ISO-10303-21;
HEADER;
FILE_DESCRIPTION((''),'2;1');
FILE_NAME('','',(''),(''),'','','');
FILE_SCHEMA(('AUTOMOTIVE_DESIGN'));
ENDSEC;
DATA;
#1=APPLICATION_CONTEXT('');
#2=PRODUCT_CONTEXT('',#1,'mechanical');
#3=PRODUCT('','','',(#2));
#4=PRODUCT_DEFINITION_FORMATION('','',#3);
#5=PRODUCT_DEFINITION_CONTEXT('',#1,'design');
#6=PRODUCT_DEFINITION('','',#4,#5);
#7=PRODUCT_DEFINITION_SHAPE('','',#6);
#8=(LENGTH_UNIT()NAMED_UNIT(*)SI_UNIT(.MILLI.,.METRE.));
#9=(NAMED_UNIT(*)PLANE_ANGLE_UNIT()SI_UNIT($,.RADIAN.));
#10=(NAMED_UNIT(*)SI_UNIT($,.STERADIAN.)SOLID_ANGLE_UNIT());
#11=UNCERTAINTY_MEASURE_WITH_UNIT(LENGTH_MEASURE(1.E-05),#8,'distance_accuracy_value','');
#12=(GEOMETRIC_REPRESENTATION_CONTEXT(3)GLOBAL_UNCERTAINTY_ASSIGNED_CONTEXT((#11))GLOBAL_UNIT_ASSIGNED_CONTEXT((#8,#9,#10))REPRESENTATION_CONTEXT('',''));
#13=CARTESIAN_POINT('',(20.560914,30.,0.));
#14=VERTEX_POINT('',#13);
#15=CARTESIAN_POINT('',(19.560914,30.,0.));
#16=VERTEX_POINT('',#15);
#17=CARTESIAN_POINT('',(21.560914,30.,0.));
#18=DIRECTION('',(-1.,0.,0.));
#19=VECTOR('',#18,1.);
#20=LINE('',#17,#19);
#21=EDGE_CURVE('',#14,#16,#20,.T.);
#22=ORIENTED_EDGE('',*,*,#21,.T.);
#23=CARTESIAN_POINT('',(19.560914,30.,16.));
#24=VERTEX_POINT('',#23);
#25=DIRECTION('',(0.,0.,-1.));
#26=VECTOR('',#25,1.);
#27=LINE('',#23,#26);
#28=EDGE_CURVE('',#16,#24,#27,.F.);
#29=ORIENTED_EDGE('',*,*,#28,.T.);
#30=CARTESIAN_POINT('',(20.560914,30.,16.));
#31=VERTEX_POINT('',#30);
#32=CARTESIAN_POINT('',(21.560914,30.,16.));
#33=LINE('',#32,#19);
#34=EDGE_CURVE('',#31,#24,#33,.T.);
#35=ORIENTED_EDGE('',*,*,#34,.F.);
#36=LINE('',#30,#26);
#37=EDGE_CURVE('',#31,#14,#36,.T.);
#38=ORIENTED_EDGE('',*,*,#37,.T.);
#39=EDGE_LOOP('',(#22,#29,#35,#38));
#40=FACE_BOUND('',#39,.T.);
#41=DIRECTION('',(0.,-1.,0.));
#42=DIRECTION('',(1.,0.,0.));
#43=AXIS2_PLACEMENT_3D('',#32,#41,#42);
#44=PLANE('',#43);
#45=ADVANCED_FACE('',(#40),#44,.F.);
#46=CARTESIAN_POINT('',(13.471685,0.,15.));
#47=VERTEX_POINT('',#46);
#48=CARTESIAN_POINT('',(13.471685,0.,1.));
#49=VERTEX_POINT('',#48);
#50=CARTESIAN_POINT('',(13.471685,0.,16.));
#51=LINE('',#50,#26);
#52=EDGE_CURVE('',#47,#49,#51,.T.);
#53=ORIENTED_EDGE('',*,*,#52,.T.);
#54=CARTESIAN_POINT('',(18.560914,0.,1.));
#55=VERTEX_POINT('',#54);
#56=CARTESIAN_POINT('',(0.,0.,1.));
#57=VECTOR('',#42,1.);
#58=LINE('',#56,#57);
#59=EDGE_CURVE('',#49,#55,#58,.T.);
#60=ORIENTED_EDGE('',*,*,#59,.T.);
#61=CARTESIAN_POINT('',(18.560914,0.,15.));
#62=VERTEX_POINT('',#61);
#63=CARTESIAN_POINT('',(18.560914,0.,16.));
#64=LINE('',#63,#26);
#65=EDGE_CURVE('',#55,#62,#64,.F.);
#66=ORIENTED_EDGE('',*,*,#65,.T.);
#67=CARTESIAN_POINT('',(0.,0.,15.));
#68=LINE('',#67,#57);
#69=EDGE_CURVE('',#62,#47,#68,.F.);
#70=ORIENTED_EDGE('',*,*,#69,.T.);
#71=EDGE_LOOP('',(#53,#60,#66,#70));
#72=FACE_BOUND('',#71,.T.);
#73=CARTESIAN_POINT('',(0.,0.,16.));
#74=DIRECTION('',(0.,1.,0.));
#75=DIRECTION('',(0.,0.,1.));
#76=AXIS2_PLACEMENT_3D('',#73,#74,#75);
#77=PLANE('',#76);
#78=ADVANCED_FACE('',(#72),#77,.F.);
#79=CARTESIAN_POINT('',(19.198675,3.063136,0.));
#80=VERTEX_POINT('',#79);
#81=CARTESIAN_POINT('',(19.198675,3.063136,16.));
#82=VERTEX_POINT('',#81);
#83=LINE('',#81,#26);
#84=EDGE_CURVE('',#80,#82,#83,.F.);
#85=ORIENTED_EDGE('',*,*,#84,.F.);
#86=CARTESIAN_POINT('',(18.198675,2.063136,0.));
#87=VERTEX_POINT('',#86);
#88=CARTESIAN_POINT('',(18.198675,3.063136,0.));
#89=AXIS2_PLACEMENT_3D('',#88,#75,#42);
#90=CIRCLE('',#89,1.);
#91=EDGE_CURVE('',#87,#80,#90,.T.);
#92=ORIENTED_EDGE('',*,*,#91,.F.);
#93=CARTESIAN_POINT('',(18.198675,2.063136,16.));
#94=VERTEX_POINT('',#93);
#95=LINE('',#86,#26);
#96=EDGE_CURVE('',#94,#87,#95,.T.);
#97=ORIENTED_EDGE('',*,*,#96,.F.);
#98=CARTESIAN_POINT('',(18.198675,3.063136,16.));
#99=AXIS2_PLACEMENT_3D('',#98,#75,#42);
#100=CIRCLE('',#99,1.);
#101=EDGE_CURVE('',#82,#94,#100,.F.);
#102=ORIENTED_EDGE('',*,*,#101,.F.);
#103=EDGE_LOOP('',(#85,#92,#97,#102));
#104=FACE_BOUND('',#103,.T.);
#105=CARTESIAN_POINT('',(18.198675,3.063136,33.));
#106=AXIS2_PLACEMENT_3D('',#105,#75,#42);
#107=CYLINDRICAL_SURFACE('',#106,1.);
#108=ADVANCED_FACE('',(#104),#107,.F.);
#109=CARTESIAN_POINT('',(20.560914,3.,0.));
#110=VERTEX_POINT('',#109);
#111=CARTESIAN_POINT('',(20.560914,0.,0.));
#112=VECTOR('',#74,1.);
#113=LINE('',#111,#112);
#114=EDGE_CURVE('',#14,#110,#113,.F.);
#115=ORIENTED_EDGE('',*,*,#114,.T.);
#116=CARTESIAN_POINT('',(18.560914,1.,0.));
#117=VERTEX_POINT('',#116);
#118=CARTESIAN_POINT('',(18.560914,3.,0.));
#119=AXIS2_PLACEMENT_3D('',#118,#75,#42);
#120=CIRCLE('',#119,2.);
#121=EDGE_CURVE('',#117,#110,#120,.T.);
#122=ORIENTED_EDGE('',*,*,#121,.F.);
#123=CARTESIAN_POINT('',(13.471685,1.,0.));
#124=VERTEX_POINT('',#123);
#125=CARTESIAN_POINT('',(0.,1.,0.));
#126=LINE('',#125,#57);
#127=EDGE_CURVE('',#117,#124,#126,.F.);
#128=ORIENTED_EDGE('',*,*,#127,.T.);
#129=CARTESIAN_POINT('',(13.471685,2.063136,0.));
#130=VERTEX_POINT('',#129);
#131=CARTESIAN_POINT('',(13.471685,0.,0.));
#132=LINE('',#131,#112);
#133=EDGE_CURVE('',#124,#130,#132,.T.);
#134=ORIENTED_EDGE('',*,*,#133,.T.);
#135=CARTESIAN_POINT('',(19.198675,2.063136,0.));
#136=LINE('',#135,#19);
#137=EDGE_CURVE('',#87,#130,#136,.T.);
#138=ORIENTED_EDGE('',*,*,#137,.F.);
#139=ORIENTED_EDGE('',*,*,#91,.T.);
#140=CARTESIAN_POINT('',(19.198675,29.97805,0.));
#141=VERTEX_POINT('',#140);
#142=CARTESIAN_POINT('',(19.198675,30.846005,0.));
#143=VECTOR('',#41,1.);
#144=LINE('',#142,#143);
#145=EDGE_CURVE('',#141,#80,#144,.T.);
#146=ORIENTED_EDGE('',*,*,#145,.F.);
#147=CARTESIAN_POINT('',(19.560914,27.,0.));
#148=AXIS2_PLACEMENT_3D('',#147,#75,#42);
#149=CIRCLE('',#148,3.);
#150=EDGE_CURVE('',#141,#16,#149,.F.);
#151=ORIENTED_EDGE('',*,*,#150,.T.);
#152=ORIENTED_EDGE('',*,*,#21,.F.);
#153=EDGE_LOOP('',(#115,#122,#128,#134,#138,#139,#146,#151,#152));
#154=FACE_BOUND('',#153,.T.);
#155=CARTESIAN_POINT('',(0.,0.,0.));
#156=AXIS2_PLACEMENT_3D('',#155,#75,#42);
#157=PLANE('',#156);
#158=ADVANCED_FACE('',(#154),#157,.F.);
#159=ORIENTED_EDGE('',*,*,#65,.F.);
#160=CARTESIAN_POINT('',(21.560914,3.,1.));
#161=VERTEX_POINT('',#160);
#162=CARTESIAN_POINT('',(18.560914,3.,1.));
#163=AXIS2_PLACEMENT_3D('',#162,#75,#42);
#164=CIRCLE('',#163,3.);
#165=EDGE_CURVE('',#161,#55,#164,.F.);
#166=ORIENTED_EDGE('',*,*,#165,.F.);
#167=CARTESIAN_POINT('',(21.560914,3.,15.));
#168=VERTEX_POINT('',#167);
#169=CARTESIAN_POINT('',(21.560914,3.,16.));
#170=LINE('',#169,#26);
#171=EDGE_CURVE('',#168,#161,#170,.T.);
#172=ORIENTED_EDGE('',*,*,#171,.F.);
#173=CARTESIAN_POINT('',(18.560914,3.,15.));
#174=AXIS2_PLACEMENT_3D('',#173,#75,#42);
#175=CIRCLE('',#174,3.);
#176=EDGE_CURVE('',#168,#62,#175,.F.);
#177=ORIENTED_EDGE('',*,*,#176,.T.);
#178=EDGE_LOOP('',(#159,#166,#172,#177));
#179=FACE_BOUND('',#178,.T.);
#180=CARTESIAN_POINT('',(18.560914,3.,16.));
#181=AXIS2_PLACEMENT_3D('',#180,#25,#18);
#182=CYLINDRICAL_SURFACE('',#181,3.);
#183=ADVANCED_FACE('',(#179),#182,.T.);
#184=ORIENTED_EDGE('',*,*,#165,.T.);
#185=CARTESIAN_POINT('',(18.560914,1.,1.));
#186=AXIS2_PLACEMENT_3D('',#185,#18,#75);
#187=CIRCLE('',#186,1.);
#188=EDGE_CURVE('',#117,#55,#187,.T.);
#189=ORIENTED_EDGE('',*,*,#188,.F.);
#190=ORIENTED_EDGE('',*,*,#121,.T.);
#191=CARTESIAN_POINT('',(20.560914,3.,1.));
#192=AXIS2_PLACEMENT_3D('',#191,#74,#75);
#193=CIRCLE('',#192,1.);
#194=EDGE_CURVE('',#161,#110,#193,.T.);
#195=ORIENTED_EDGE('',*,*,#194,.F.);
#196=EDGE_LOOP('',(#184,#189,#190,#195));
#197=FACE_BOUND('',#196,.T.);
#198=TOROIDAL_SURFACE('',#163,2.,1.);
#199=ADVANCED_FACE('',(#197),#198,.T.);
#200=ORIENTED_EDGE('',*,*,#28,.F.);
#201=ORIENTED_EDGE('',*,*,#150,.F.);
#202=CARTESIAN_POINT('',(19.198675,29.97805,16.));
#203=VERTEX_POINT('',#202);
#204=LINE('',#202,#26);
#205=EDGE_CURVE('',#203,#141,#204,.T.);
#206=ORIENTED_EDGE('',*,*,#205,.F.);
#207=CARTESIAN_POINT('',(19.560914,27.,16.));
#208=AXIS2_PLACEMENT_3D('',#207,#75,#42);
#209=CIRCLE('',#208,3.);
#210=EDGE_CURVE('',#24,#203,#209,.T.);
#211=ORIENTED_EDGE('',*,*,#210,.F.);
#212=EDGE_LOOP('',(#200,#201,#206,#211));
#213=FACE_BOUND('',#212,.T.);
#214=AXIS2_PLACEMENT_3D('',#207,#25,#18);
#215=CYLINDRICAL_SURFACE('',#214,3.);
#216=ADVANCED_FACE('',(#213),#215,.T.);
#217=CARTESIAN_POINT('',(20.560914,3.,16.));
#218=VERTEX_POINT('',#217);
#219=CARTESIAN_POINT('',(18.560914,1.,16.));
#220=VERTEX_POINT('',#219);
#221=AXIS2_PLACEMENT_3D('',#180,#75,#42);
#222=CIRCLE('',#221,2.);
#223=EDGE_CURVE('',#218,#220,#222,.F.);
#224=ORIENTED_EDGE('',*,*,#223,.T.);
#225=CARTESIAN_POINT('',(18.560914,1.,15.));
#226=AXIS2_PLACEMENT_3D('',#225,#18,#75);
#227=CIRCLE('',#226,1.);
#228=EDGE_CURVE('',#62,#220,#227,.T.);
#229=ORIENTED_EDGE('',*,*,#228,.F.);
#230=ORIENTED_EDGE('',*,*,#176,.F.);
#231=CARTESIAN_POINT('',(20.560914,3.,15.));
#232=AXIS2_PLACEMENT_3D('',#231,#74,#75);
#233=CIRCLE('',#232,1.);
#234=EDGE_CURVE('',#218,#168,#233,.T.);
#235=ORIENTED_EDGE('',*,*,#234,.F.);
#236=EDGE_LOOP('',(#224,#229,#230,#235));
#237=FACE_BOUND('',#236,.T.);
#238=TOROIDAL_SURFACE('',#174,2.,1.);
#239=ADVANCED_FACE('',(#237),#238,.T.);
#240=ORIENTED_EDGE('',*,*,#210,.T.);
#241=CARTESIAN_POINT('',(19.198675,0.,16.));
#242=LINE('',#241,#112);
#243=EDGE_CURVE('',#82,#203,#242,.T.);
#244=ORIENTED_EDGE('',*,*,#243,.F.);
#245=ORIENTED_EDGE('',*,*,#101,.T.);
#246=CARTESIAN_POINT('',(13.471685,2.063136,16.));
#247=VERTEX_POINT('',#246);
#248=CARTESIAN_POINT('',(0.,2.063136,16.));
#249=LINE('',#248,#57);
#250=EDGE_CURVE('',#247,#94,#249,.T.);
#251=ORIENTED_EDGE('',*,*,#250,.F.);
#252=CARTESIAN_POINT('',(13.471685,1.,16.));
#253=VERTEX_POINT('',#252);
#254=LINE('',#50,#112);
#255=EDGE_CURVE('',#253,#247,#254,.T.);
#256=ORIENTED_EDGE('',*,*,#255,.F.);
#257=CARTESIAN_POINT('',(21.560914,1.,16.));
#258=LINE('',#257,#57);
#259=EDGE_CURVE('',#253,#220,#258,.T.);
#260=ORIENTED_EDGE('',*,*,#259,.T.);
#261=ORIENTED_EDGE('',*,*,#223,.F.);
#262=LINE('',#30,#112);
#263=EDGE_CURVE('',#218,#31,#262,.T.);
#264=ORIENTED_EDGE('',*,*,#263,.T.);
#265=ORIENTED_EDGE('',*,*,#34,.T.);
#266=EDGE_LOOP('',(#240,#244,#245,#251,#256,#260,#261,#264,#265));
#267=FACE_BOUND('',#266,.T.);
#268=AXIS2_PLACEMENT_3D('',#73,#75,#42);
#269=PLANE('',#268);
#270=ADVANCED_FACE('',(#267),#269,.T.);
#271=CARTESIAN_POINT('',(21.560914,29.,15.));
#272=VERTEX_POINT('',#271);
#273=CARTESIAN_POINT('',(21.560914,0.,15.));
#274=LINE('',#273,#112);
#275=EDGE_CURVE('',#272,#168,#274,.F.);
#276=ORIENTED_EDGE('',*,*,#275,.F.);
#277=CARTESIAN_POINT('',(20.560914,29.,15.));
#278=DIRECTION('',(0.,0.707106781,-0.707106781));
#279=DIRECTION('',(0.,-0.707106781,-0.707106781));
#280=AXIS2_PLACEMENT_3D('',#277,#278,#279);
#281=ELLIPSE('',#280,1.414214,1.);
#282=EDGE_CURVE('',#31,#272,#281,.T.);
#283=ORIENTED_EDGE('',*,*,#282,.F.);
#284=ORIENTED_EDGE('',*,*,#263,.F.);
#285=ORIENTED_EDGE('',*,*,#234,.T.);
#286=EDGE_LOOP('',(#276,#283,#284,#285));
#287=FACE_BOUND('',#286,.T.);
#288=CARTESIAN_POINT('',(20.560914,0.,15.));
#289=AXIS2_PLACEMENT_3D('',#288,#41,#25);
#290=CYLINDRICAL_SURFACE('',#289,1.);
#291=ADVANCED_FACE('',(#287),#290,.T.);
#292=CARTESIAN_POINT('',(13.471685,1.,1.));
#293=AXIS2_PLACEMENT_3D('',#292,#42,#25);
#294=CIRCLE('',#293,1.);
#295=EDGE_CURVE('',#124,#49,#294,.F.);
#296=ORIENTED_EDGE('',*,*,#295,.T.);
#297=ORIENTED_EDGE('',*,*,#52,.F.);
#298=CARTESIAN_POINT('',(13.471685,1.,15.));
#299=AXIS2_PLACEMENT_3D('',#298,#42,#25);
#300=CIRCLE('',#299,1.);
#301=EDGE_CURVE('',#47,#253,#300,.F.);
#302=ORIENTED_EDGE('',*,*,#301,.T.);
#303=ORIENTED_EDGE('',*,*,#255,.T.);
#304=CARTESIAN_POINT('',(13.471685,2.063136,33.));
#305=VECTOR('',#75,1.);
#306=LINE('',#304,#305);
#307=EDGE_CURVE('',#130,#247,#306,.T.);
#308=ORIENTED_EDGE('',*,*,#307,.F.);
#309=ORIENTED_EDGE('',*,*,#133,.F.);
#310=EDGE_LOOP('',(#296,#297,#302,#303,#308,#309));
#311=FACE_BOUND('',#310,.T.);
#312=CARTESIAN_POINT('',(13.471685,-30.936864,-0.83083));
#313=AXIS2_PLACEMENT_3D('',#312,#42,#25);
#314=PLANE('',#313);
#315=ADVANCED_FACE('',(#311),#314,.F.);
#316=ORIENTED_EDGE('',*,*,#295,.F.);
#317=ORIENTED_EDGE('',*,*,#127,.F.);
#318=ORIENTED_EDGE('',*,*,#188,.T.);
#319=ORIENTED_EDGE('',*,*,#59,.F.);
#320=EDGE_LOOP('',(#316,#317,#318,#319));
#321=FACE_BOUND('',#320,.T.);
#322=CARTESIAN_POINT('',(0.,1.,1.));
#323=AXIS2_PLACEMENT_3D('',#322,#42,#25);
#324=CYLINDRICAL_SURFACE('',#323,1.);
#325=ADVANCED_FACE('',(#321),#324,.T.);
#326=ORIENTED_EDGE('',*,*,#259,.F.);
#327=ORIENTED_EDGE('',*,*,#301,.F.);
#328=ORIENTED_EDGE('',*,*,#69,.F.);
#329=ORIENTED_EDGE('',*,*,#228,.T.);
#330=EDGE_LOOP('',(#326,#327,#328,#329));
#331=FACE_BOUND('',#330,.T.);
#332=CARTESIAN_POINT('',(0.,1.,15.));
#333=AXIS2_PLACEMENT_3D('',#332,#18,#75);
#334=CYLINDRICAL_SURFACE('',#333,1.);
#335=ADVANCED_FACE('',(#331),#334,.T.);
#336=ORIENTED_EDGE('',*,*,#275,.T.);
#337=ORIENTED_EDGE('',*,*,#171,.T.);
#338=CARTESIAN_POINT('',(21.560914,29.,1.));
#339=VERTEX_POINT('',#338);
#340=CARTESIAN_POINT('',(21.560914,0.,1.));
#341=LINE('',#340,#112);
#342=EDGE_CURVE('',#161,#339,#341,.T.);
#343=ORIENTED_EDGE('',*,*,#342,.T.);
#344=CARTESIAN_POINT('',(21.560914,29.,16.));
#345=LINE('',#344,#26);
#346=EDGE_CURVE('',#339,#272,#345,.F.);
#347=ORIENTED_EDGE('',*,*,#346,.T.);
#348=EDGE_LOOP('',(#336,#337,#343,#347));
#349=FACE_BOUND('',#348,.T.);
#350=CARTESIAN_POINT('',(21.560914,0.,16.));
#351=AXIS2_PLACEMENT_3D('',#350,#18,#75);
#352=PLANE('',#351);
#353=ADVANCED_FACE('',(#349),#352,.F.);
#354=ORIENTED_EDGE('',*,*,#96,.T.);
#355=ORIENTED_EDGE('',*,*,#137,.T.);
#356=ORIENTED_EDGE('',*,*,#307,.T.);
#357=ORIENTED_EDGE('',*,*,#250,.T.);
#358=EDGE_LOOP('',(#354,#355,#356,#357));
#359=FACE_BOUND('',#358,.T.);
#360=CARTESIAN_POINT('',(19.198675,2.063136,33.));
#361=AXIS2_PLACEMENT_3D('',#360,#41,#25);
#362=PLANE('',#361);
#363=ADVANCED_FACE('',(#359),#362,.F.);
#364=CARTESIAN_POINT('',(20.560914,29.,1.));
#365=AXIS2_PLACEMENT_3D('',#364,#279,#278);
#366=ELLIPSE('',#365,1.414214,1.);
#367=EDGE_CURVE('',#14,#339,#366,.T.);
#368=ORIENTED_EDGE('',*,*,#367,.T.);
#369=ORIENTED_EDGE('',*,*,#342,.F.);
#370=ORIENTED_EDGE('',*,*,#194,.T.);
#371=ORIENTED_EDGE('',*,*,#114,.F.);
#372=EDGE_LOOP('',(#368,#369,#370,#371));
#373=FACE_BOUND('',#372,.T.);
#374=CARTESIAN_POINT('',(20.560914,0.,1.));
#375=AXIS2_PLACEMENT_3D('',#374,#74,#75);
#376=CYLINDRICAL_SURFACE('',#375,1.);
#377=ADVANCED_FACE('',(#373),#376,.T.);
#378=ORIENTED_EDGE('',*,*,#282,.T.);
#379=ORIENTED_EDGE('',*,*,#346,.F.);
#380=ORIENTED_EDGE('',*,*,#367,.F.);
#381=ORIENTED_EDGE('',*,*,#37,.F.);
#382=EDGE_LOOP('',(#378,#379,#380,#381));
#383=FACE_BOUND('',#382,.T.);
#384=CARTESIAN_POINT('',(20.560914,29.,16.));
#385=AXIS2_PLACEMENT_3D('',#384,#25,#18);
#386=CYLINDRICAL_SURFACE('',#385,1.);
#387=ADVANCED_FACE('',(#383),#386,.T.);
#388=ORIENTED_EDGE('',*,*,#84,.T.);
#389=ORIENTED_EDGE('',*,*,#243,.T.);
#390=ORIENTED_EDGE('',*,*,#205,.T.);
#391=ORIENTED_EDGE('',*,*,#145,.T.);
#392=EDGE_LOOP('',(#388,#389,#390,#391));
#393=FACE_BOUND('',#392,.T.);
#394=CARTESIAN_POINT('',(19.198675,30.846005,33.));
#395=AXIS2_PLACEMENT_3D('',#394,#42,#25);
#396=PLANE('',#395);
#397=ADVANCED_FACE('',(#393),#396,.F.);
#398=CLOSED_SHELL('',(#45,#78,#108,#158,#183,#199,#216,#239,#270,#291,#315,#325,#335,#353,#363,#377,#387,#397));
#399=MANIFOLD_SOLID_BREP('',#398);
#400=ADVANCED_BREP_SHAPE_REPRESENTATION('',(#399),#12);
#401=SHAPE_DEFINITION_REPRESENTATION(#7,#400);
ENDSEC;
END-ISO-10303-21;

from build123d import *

# Parameters (mm, degrees)
BOSS_EXTRUDE1_DEPTH = 16
FILLET1_R           = 1
FILLET2_R           = 3
FILLET3_R           = 3
FILLET4_R           = 3
SKETCH2_W           = 7.425804379
SKETCH2_H           = 16
CUT_EXTRUDE1_DEPTH  = 13
FILLET5_R           = 3
SKETCH3_W           = 17.675238391
SKETCH3_H           = 28.7828695
CUT_EXTRUDE2_DEPTH  = 33
FILLET6_R           = 1
SKETCH4_W           = 6.794443954
SKETCH4_H           = 18.076730961
CUT_EXTRUDE3_DEPTH  = 33


with BuildPart() as part:
    # Sketch1 → Boss-Extrude1 (new body)
    with BuildSketch(Plane.XY):
        Polygon((0, 0), (21.560913706, 0), (21.560913706, 30), (16.560913706, 30), (16.560913706, 5), (0, 5), align=None)
    extrude(amount=BOSS_EXTRUDE1_DEPTH)

    # Fillet1
    fillet1_edges = [part.edges().sort_by_distance(p)[0] for p in [
        (21.560913706, 30, 8),
        (0, 0, 8),
        (21.560913706, 15, 16),
        (21.560913706, 15, 0),
        (10.780456853, 0, 0),
        (10.780456853, 0, 16),
    ]]
    fillet(fillet1_edges, radius=FILLET1_R)

    # Fillet2
    # the kernel refuses this fillet: 3 mm, written as the material it takes off along each edge
    with BuildSketch(Plane(origin=(18.560913706, 3, 16), x_dir=(0, -1, 0), z_dir=(-1, 0, 0))) as fillet2_piece_1:
        with BuildLine():
            CenterArc((2, -1), 1, 0, 90)
            Line((3, -1), (3, 0))
            Line((3, 0), (2, 0))
        make_face()
    revolve(axis=Axis((18.560913706, 3, 16), (0, 0, 1)), revolution_arc=90, mode=Mode.SUBTRACT)
    with BuildSketch(Plane(origin=(18.560913706, 3, 0), x_dir=(1, 0, 0), z_dir=(0, 1, 0))) as fillet2_piece_2:
        with BuildLine():
            CenterArc((2, -1), 1, 0, 90)
            Line((3, -1), (3, 0))
            Line((3, 0), (2, 0))
        make_face()
    revolve(axis=Axis((18.560913706, 3, 0), (0, 0, -1)), revolution_arc=90, mode=Mode.SUBTRACT)
    with BuildSketch(Plane(origin=(21.560913706, 0, 0), x_dir=(-1, 0, 0), z_dir=(0, 0, 1))) as fillet2_piece_3:
        with BuildLine():
            CenterArc((FILLET2_R, -FILLET2_R), FILLET2_R, 90, 90)
            Line((0, -FILLET2_R), (0, 0))
            Line((0, 0), (FILLET2_R, 0))
        make_face()
    extrude(amount=16, mode=Mode.SUBTRACT)

    # Fillet3
    fillet3_edges = [part.edges().sort_by_distance(p)[0] for p in [
        (16.560913706, 5, 8),
    ]]
    fillet(fillet3_edges, radius=FILLET3_R)

    # Fillet4
    fillet4_edges = [part.edges().sort_by_distance(p)[0] for p in [
        (0, 5, 8),
        (16.560913706, 30, 8),
    ]]
    fillet(fillet4_edges, radius=FILLET4_R)

    # Sketch2 → Cut-Extrude1 (cut)
    with BuildSketch(Plane.XZ):
        with Locations((3.71290219, 8)):
            Rectangle(SKETCH2_W, SKETCH2_H)
    extrude(amount=-CUT_EXTRUDE1_DEPTH, mode=Mode.SUBTRACT)

    # Fillet5
    fillet5_edges = [part.edges().sort_by_distance(p)[0] for p in [
        (7.425804379, 5, 8),
    ]]
    fillet(fillet5_edges, radius=FILLET5_R)

    # Sketch3 → Cut-Extrude2 (cut)
    with BuildSketch(Plane(origin=(0, 0, 0), x_dir=(-1, 0, 0), z_dir=(0, 0, -1))):
        with Locations((-10.361055803, 16.45457074)):
            Rectangle(SKETCH3_W, SKETCH3_H)
    extrude(amount=-CUT_EXTRUDE2_DEPTH, mode=Mode.SUBTRACT)

    # Fillet6
    fillet6_edges = [part.edges().sort_by_distance(p)[0] for p in [
        (19.198674998, 2.06313599, 8),
    ]]
    fillet(fillet6_edges, radius=FILLET6_R)

    # Sketch4 → Cut-Extrude3 (cut)
    with BuildSketch(Plane(origin=(0, 2.06313599, 0), x_dir=(1, 0, 0), z_dir=(0, 1, 0))):
        with Locations((10.074463298, -8.207535366)):
            Rectangle(SKETCH4_W, SKETCH4_H)
    extrude(amount=-CUT_EXTRUDE3_DEPTH, mode=Mode.SUBTRACT)


solid = part.part
